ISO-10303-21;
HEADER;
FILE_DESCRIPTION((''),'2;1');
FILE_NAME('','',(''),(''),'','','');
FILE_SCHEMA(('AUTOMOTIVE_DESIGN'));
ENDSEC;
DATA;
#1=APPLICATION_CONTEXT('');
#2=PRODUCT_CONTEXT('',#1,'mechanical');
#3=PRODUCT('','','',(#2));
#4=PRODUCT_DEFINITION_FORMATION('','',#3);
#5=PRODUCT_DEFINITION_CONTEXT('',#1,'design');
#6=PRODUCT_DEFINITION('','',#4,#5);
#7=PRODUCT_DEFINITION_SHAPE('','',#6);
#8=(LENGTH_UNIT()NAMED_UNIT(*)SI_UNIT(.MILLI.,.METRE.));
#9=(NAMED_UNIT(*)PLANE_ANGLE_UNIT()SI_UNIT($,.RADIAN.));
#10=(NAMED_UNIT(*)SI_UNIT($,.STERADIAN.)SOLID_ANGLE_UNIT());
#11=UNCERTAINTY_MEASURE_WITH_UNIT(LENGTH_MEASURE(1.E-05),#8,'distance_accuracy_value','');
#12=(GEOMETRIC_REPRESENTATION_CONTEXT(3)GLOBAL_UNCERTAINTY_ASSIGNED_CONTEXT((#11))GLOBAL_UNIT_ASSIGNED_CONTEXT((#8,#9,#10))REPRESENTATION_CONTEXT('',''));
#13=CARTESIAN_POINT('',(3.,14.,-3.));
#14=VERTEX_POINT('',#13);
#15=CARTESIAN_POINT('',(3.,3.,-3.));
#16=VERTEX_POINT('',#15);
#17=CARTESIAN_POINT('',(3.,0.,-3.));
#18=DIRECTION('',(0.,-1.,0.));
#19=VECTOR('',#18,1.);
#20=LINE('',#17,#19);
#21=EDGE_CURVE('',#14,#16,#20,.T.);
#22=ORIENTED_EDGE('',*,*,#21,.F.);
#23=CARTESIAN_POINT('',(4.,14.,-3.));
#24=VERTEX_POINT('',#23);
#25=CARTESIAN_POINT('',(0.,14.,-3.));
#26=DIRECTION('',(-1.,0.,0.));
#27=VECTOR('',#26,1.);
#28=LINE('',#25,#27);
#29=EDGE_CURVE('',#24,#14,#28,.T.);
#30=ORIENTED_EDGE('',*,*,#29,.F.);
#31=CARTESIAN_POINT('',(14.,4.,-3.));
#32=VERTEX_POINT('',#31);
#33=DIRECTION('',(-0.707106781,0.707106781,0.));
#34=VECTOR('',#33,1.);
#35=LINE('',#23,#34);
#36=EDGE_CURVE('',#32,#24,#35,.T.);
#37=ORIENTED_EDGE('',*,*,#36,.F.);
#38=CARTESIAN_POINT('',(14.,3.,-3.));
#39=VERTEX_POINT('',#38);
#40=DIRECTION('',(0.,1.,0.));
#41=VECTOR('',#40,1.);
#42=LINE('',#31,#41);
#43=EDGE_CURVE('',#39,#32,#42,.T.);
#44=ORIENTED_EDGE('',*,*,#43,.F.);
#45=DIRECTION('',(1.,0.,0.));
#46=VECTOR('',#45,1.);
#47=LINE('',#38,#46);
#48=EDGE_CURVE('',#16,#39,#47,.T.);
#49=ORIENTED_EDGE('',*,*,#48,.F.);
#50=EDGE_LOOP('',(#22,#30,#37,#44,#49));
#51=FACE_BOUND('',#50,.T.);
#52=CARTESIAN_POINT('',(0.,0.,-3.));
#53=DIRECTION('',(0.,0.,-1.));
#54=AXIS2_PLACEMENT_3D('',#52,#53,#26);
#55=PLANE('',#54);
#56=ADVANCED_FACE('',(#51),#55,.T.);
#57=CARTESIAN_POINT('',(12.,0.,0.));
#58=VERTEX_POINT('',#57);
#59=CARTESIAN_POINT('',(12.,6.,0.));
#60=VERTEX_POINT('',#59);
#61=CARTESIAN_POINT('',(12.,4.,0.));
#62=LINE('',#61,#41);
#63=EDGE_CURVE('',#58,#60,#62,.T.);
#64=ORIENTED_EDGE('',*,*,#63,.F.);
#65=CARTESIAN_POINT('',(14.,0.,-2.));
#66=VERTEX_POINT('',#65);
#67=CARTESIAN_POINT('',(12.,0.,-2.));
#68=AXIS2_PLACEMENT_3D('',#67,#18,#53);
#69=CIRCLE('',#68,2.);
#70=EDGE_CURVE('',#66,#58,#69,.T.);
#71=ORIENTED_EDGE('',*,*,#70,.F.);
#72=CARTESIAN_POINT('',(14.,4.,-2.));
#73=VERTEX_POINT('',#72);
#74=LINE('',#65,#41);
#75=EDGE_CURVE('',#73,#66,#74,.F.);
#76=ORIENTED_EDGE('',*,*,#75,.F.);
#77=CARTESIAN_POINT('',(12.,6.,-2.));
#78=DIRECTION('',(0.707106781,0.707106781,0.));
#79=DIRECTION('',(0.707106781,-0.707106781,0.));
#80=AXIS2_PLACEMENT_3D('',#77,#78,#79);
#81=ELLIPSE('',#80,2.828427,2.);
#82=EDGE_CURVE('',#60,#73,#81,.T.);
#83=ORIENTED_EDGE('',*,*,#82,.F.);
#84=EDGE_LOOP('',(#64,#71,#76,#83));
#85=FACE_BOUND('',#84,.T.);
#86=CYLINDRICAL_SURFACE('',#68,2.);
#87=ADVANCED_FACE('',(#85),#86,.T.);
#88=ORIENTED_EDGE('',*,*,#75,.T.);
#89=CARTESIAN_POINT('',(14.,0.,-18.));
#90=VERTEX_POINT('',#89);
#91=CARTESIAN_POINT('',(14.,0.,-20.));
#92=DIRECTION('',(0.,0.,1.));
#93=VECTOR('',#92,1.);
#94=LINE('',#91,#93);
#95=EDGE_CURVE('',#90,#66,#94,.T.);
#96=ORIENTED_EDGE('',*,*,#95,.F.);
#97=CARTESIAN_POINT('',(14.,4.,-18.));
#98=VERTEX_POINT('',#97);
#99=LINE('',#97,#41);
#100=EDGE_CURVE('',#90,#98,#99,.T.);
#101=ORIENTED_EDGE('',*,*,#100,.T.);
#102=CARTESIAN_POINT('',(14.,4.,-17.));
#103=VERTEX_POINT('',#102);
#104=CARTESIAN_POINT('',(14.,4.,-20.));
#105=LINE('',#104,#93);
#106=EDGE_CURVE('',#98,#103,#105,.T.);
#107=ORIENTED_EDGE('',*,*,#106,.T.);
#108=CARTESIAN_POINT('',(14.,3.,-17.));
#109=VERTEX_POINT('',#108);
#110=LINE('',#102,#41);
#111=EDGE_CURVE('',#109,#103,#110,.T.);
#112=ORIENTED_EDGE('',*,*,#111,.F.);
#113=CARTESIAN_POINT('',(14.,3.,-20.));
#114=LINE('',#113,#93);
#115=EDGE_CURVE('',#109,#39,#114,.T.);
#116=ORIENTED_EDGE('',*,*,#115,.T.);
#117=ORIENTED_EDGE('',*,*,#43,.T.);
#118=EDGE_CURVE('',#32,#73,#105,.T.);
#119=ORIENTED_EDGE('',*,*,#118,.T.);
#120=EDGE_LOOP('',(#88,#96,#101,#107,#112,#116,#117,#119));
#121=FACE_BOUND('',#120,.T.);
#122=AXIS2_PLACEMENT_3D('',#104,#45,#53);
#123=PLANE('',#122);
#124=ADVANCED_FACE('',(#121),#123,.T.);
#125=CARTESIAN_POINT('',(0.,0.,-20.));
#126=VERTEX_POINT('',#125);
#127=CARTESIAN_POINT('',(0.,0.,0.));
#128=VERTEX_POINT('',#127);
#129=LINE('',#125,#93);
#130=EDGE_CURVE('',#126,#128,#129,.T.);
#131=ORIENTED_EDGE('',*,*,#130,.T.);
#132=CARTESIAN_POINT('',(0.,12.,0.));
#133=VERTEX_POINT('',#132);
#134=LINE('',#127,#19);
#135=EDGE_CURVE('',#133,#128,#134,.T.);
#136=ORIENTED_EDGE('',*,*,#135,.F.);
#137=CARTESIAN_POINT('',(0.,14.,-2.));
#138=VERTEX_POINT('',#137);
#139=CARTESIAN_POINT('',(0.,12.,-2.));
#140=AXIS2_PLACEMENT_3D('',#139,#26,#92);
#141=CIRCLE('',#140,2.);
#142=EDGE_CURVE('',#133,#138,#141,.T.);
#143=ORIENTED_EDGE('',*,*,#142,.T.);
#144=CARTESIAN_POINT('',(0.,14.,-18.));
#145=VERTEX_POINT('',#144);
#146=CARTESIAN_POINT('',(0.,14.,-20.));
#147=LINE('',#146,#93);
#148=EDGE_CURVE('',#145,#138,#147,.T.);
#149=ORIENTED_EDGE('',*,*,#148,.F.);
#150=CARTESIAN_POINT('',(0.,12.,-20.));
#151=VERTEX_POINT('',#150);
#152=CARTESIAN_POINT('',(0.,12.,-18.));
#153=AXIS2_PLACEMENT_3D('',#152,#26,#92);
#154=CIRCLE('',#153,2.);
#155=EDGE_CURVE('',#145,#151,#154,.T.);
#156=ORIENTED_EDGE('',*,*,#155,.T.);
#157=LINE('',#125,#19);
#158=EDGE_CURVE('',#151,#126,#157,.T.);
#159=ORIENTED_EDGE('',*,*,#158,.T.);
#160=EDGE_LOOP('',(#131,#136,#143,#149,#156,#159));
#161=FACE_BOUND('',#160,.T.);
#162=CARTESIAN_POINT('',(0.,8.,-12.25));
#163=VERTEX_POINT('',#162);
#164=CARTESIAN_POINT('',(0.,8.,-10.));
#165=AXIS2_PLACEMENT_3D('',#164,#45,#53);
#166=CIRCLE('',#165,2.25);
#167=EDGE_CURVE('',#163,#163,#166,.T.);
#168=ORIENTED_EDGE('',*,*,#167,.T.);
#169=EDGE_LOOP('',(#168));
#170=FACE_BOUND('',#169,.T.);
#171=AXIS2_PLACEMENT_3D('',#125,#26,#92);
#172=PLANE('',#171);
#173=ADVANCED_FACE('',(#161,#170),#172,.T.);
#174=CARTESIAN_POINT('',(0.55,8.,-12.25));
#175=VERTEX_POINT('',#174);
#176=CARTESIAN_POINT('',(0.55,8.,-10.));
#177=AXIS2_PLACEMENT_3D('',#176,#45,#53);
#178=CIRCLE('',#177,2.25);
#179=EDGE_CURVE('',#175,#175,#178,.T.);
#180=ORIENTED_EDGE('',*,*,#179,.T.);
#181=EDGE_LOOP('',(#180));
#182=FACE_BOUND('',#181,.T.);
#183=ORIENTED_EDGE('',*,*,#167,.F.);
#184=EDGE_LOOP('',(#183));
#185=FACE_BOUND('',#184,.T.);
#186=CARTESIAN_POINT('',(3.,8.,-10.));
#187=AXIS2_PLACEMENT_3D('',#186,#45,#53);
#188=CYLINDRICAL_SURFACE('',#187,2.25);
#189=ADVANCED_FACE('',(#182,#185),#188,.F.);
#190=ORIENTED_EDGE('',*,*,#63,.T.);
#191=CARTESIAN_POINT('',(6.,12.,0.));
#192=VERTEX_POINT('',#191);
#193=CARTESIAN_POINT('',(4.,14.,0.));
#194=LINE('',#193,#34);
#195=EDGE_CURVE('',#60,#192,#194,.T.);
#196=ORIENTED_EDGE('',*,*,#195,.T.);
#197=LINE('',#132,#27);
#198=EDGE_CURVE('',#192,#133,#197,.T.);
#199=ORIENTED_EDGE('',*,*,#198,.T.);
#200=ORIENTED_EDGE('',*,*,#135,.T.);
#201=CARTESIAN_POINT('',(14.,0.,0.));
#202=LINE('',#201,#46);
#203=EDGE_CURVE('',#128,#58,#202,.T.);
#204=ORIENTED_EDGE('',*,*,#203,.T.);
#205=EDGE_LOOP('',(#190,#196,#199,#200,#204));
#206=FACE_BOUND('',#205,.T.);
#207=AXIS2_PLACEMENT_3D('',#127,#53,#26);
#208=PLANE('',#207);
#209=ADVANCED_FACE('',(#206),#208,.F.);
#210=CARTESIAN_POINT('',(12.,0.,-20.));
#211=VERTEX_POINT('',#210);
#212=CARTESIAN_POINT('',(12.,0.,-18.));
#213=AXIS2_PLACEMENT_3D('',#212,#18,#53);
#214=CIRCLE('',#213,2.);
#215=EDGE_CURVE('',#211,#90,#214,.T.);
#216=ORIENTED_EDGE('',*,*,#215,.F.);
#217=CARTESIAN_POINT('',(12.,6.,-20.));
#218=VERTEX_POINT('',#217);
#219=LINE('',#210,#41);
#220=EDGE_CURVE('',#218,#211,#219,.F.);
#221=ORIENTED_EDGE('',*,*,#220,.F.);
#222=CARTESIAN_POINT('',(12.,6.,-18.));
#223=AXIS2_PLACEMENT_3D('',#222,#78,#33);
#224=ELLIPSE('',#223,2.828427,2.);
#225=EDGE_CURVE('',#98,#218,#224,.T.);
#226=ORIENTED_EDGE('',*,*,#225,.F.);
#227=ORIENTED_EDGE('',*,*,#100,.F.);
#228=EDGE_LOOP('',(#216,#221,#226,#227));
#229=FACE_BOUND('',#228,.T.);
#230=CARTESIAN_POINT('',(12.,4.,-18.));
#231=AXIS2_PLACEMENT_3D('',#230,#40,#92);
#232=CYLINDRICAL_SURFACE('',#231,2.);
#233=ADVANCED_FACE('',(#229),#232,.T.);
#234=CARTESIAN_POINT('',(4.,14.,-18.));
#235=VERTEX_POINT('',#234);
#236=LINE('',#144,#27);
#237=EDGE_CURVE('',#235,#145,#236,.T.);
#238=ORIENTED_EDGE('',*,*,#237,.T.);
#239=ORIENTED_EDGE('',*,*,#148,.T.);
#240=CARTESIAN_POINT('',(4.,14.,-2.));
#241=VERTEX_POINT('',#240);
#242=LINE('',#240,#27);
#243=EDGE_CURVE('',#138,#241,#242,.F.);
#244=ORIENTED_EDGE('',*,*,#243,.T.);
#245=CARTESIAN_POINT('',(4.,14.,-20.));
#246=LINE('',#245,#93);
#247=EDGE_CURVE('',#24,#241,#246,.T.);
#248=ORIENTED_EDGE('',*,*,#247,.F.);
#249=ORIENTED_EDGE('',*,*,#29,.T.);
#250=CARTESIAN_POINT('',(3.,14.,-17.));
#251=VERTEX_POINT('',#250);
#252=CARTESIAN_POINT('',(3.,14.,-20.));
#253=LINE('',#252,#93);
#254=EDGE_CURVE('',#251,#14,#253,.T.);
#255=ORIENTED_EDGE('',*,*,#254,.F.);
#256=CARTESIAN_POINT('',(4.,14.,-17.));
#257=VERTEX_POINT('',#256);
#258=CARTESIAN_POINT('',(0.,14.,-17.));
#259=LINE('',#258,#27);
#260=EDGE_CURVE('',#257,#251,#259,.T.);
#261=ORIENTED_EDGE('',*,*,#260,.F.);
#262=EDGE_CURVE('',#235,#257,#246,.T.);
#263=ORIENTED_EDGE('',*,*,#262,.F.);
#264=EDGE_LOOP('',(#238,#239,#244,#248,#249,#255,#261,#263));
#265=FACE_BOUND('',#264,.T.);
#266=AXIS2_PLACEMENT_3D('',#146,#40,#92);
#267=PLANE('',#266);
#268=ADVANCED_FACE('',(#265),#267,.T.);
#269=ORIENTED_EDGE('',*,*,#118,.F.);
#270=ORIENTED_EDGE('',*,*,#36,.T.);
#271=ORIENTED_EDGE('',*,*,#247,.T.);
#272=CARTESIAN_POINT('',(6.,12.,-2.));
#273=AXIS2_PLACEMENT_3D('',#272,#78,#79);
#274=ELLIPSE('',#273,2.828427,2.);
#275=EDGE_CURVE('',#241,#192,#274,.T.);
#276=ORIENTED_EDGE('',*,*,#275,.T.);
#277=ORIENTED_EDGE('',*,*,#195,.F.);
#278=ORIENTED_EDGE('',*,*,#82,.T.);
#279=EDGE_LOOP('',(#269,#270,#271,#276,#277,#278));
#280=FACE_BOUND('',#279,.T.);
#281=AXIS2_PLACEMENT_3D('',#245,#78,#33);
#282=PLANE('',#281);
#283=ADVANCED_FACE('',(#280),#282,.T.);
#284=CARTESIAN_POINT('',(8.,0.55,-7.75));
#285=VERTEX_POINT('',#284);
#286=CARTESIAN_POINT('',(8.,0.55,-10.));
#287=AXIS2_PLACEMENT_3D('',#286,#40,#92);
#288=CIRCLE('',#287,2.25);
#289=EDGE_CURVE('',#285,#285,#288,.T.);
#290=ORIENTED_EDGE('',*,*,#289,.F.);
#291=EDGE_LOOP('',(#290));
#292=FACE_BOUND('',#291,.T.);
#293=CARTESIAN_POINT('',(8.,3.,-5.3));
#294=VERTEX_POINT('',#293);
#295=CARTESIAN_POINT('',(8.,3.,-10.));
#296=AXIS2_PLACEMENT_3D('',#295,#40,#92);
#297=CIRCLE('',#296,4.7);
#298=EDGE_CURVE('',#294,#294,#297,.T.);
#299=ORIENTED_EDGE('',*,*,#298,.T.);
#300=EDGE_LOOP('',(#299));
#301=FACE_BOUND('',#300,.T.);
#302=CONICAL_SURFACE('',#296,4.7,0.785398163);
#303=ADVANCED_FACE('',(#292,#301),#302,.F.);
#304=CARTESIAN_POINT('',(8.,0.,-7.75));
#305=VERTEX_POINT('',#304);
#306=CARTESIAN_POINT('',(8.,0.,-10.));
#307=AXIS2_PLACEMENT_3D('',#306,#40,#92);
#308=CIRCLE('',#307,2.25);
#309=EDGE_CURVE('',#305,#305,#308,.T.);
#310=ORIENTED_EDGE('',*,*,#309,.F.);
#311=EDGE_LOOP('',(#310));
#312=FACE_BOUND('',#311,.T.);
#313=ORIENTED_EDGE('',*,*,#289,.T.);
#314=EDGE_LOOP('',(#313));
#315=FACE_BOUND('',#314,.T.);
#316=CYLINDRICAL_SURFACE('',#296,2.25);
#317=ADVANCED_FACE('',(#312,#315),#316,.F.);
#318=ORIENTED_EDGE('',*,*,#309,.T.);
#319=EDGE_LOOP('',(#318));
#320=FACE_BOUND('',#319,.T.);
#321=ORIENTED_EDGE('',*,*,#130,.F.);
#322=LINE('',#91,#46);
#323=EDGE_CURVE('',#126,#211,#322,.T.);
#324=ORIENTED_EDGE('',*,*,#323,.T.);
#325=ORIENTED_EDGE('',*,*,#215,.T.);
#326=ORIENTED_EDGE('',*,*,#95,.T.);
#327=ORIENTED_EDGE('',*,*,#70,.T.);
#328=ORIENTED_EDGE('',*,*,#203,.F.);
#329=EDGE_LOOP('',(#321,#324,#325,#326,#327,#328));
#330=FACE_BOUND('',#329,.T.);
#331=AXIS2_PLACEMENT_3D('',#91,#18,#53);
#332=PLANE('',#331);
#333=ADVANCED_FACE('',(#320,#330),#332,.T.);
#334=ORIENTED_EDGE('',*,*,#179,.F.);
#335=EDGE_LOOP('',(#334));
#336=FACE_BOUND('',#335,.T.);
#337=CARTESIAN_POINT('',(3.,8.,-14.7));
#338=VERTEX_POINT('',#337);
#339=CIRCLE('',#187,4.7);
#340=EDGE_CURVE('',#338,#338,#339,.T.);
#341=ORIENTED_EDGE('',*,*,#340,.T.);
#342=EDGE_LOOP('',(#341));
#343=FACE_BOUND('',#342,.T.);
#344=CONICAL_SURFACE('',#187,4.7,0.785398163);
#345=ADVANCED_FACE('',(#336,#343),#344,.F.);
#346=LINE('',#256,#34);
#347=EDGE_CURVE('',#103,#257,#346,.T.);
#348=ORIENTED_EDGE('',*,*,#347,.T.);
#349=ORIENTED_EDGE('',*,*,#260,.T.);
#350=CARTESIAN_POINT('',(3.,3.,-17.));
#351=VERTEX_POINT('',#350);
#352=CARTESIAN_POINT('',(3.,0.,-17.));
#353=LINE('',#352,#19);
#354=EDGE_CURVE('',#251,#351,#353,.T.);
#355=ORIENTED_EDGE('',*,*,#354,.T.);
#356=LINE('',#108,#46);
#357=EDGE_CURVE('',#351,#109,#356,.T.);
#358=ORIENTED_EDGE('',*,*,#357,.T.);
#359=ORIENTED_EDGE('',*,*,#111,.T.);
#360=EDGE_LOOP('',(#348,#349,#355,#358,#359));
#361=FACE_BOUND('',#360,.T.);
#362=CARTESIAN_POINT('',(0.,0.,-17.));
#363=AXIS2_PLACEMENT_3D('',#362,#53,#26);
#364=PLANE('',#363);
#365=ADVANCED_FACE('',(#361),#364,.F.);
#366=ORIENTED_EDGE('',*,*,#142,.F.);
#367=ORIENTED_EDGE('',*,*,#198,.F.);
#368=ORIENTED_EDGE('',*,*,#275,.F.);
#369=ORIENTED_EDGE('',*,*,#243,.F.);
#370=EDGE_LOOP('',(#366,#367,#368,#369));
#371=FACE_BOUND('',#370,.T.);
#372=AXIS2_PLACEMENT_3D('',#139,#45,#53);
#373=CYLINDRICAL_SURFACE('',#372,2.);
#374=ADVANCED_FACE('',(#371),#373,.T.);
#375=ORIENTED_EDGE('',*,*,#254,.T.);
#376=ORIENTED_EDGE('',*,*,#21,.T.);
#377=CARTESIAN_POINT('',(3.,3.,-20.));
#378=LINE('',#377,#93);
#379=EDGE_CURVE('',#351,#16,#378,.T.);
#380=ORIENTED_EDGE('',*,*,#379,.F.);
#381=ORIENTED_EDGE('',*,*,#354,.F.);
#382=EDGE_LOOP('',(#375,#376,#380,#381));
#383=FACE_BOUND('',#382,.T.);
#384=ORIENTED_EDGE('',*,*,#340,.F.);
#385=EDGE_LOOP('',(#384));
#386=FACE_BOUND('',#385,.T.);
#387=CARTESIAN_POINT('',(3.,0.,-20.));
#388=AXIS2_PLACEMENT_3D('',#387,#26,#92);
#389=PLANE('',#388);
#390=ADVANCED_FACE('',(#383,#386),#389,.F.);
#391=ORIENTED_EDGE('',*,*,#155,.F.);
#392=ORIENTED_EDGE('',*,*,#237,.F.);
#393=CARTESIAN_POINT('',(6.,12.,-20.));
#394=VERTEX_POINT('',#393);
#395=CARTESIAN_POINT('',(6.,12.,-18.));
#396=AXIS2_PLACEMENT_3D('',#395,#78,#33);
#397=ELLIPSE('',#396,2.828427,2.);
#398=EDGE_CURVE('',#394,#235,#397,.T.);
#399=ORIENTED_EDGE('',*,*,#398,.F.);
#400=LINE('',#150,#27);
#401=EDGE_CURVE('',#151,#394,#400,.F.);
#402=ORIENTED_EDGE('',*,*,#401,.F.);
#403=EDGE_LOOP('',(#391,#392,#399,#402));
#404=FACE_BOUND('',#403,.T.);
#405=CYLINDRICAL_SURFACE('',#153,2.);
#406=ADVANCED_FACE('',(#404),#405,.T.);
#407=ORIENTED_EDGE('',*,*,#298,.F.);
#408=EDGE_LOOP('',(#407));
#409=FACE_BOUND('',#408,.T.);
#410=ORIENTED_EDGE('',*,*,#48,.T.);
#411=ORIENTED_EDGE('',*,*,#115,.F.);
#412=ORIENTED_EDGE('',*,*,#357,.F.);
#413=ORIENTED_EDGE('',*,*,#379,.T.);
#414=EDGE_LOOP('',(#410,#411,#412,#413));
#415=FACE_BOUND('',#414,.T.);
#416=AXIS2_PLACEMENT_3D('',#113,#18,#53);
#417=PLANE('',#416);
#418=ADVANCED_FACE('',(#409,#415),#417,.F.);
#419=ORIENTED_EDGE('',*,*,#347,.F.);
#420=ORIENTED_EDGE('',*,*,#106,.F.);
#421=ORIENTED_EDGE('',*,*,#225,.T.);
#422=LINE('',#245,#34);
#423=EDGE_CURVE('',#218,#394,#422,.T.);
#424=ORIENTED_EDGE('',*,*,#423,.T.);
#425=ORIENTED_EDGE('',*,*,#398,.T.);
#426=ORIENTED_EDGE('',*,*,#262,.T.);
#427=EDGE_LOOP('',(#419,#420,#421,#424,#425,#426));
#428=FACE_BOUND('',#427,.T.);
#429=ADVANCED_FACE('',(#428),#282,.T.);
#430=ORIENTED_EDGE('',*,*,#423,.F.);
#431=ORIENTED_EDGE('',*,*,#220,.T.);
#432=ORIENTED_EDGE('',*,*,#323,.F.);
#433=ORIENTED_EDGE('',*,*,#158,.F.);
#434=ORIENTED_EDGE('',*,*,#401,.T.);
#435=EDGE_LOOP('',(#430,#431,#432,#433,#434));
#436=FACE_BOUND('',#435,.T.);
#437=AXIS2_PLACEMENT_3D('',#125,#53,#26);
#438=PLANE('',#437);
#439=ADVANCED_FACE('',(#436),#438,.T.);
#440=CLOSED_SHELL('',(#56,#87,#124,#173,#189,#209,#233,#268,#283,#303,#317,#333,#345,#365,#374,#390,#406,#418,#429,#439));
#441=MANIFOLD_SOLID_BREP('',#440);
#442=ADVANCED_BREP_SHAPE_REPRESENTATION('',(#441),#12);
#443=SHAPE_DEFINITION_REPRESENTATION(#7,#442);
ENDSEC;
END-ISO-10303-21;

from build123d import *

# Parameters (mm, degrees)
BOSS_EXTRUDE2_DEPTH = 20
SHELL1_START        = 3
SHELL1_OUTLINE_W    = 11
SHELL1_OUTLINE_H    = 14
SHELL1_DEPTH        = 11
FILLET3_R           = 2


# Read off the part's stored shape, not the designer's step: Shell1
with BuildPart() as part:
    # Sketch1 → Boss-Extrude2 (new body)
    with BuildSketch(Plane.XY):
        Polygon((0, 0), (0, 14), (4, 14), (14, 4), (14, 0), align=None)
    extrude(amount=-BOSS_EXTRUDE2_DEPTH)

    # Shell1 outline → Shell1 (cut)
    with BuildSketch(Plane(origin=(0, 0, 0), x_dir=(1, 0, 0), z_dir=(0, 1, 0)).offset(SHELL1_START)):
        with Locations((8.5, 10)):
            Rectangle(SHELL1_OUTLINE_W, SHELL1_OUTLINE_H)
    extrude(amount=SHELL1_DEPTH, mode=Mode.SUBTRACT)

    # Fillet3
    fillet3_edges = [part.edges().sort_by_distance(p)[0] for p in [
        (2, 14, -20),
        (2, 14, 0),
        (14, 2, 0),
        (14, 2, -20),
    ]]
    fillet(fillet3_edges, radius=FILLET3_R)

    # Sketch6 → CSK for M4 Flat Head Machine Screw3 (revolve, cut)
    with BuildSketch(Plane(origin=(3, 8, -10), x_dir=(0, 0, -1), z_dir=(0, 1, 0))):
        Polygon((0, 0), (0, 3), (2.25, 3), (2.25, 2.45), (4.7, 0), align=None)
    revolve(axis=Axis((9.35, 8, -10), (-1, 0, 0)), mode=Mode.SUBTRACT)

    # Sketch9 → CSK for M4 Flat Head Machine Screw2 (revolve, cut)
    with BuildSketch(Plane(origin=(8, 3, -10), x_dir=(0, 0, 1), z_dir=(1, 0, 0))):
        Polygon((0, 0), (0, 3), (2.25, 3), (2.25, 2.45), (4.7, 0), align=None)
    revolve(axis=Axis((8, 9.35, -10), (0, -1, 0)), mode=Mode.SUBTRACT)


solid = part.part
